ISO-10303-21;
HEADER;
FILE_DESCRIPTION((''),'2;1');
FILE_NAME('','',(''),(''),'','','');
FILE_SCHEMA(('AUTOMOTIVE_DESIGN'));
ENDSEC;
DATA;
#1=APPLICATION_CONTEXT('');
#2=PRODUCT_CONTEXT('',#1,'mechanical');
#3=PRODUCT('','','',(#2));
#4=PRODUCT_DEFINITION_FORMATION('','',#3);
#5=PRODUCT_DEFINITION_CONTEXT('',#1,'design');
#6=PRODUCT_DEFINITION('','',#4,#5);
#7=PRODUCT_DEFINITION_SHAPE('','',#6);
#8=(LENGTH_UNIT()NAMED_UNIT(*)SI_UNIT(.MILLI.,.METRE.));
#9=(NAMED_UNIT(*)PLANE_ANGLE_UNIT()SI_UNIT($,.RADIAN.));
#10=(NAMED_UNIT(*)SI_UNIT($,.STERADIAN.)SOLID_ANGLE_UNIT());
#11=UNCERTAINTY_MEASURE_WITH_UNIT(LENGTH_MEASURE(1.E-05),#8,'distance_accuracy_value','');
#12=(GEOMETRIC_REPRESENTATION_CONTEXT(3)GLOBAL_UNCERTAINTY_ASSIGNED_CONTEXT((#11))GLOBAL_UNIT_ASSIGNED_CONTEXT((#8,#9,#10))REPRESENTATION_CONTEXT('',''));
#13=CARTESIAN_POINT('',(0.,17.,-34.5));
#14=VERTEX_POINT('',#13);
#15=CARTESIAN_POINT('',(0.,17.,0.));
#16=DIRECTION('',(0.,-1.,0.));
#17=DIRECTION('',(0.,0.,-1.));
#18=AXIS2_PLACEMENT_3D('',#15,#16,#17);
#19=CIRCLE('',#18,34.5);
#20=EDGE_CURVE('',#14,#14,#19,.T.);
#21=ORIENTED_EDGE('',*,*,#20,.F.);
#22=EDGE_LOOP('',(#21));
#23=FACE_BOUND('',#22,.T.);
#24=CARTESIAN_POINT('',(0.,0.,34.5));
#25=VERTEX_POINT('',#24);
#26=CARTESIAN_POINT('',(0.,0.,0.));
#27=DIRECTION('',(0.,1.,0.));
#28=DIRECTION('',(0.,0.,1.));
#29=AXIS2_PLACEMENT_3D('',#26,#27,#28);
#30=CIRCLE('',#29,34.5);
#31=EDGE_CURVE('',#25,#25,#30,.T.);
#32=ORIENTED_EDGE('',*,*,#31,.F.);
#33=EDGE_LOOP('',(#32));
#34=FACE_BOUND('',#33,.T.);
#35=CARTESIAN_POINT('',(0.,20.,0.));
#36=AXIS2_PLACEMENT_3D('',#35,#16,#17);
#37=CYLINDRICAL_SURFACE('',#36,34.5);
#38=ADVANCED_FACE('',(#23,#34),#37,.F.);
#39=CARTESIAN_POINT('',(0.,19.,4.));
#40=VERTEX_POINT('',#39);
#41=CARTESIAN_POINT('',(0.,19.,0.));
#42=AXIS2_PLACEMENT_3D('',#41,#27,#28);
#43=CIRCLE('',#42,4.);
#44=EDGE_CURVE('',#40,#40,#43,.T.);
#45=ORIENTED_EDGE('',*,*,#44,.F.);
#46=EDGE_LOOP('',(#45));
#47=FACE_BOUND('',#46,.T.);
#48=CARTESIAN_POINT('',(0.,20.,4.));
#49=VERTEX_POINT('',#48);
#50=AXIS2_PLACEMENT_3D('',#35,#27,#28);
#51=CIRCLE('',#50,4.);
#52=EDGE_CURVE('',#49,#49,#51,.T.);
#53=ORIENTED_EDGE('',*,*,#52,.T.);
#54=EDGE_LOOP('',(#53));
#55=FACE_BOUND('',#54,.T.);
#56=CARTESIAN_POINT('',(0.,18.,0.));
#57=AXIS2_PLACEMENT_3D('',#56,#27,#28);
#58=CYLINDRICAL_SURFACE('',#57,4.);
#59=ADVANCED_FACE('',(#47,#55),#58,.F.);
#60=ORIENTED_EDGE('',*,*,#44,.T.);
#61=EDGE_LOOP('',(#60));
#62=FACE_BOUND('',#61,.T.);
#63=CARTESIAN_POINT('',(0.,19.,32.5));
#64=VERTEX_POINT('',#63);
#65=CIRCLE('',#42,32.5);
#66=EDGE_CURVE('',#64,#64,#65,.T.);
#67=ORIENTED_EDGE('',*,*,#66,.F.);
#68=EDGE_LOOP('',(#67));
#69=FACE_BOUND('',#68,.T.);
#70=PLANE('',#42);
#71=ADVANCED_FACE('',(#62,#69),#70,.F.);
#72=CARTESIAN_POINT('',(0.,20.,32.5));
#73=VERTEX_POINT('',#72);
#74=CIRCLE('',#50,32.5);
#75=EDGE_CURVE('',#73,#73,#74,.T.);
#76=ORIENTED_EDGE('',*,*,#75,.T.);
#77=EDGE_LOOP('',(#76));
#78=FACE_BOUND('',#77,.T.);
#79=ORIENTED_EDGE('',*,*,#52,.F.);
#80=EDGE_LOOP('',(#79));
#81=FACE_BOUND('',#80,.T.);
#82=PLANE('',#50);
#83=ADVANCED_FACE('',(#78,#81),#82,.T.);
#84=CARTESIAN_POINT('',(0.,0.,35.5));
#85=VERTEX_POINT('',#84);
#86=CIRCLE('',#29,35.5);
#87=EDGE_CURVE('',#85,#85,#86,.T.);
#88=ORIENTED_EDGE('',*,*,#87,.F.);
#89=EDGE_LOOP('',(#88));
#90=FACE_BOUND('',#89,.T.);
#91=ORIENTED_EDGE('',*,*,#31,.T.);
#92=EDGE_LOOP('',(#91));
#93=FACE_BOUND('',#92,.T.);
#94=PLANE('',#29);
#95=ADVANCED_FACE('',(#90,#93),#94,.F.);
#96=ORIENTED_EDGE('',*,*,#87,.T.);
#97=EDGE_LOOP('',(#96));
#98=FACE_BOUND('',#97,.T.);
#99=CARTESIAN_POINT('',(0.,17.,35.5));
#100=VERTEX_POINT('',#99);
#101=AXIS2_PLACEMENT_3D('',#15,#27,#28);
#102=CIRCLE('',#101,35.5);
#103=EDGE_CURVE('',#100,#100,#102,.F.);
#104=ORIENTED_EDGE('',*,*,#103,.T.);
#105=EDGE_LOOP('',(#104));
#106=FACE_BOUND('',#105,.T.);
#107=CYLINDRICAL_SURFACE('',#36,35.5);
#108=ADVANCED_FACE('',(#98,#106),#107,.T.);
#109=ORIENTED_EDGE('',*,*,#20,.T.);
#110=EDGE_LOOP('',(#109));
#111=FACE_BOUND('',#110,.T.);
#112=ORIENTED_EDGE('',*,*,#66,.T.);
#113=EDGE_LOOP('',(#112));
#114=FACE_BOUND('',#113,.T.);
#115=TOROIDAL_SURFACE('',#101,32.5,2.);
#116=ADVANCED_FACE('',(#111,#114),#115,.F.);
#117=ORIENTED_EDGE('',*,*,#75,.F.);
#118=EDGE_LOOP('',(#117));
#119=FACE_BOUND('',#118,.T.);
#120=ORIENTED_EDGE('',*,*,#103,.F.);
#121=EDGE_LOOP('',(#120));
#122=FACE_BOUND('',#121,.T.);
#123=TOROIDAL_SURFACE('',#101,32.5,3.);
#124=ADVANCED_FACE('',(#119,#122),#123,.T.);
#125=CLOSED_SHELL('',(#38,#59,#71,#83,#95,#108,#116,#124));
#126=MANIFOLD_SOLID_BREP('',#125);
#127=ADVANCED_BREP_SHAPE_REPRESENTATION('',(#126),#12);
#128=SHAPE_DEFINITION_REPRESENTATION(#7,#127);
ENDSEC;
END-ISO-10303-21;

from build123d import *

# Parameters (mm, degrees)
ESQUISSE1_R             = 35.5
BOSS_EXTRU_1_DEPTH      = 20
CONG_1_R                = 3
ESQUISSE2_R             = 4
ENL_V_MAT_EXTRU_1_DEPTH = 2


# Read off the part's stored shape, not the designer's step: Coque1
with BuildPart() as part:
    # Esquisse1 → Boss.-Extru.1 (new body)
    with BuildSketch(Plane(origin=(0, 0, 0), x_dir=(1, 0, 0), z_dir=(0, 1, 0))):
        with Locations(Location((0, 0, 0), (0, 0, 270))):
            Circle(ESQUISSE1_R)
    extrude(amount=BOSS_EXTRU_1_DEPTH)

    # Congé1
    cong_1_edges = [part.edges().sort_by_distance(p)[0] for p in [
        (0, 20, -35.5),
    ]]
    fillet(cong_1_edges, radius=CONG_1_R)

    # Coque1 outline → Coque1 (revolve, cut)
    with BuildSketch(Plane.XY):
        with BuildLine():
            Line((34.5, 0), (34.5, 17))
            ThreePointArc((34.5, 17), (33.914213562, 18.414213562), (32.5, 19))
            Line((32.5, 19), (0, 19))
            Line((0, 19), (0, 0))
            Line((0, 0), (34.5, 0))
        make_face()
    revolve(axis=Axis((0, 0, 0), (0, 1, 0)), mode=Mode.SUBTRACT)

    # Esquisse2 → Enlèv. mat.-Extru.1 (cut)
    with BuildSketch(Plane(origin=(0, 20, 0), x_dir=(1, 0, 0), z_dir=(0, 1, 0))):
        with Locations(Location((0, 0, 0), (0, 0, 270))):
            Circle(ESQUISSE2_R)
    extrude(amount=-ENL_V_MAT_EXTRU_1_DEPTH, mode=Mode.SUBTRACT)


solid = part.part
